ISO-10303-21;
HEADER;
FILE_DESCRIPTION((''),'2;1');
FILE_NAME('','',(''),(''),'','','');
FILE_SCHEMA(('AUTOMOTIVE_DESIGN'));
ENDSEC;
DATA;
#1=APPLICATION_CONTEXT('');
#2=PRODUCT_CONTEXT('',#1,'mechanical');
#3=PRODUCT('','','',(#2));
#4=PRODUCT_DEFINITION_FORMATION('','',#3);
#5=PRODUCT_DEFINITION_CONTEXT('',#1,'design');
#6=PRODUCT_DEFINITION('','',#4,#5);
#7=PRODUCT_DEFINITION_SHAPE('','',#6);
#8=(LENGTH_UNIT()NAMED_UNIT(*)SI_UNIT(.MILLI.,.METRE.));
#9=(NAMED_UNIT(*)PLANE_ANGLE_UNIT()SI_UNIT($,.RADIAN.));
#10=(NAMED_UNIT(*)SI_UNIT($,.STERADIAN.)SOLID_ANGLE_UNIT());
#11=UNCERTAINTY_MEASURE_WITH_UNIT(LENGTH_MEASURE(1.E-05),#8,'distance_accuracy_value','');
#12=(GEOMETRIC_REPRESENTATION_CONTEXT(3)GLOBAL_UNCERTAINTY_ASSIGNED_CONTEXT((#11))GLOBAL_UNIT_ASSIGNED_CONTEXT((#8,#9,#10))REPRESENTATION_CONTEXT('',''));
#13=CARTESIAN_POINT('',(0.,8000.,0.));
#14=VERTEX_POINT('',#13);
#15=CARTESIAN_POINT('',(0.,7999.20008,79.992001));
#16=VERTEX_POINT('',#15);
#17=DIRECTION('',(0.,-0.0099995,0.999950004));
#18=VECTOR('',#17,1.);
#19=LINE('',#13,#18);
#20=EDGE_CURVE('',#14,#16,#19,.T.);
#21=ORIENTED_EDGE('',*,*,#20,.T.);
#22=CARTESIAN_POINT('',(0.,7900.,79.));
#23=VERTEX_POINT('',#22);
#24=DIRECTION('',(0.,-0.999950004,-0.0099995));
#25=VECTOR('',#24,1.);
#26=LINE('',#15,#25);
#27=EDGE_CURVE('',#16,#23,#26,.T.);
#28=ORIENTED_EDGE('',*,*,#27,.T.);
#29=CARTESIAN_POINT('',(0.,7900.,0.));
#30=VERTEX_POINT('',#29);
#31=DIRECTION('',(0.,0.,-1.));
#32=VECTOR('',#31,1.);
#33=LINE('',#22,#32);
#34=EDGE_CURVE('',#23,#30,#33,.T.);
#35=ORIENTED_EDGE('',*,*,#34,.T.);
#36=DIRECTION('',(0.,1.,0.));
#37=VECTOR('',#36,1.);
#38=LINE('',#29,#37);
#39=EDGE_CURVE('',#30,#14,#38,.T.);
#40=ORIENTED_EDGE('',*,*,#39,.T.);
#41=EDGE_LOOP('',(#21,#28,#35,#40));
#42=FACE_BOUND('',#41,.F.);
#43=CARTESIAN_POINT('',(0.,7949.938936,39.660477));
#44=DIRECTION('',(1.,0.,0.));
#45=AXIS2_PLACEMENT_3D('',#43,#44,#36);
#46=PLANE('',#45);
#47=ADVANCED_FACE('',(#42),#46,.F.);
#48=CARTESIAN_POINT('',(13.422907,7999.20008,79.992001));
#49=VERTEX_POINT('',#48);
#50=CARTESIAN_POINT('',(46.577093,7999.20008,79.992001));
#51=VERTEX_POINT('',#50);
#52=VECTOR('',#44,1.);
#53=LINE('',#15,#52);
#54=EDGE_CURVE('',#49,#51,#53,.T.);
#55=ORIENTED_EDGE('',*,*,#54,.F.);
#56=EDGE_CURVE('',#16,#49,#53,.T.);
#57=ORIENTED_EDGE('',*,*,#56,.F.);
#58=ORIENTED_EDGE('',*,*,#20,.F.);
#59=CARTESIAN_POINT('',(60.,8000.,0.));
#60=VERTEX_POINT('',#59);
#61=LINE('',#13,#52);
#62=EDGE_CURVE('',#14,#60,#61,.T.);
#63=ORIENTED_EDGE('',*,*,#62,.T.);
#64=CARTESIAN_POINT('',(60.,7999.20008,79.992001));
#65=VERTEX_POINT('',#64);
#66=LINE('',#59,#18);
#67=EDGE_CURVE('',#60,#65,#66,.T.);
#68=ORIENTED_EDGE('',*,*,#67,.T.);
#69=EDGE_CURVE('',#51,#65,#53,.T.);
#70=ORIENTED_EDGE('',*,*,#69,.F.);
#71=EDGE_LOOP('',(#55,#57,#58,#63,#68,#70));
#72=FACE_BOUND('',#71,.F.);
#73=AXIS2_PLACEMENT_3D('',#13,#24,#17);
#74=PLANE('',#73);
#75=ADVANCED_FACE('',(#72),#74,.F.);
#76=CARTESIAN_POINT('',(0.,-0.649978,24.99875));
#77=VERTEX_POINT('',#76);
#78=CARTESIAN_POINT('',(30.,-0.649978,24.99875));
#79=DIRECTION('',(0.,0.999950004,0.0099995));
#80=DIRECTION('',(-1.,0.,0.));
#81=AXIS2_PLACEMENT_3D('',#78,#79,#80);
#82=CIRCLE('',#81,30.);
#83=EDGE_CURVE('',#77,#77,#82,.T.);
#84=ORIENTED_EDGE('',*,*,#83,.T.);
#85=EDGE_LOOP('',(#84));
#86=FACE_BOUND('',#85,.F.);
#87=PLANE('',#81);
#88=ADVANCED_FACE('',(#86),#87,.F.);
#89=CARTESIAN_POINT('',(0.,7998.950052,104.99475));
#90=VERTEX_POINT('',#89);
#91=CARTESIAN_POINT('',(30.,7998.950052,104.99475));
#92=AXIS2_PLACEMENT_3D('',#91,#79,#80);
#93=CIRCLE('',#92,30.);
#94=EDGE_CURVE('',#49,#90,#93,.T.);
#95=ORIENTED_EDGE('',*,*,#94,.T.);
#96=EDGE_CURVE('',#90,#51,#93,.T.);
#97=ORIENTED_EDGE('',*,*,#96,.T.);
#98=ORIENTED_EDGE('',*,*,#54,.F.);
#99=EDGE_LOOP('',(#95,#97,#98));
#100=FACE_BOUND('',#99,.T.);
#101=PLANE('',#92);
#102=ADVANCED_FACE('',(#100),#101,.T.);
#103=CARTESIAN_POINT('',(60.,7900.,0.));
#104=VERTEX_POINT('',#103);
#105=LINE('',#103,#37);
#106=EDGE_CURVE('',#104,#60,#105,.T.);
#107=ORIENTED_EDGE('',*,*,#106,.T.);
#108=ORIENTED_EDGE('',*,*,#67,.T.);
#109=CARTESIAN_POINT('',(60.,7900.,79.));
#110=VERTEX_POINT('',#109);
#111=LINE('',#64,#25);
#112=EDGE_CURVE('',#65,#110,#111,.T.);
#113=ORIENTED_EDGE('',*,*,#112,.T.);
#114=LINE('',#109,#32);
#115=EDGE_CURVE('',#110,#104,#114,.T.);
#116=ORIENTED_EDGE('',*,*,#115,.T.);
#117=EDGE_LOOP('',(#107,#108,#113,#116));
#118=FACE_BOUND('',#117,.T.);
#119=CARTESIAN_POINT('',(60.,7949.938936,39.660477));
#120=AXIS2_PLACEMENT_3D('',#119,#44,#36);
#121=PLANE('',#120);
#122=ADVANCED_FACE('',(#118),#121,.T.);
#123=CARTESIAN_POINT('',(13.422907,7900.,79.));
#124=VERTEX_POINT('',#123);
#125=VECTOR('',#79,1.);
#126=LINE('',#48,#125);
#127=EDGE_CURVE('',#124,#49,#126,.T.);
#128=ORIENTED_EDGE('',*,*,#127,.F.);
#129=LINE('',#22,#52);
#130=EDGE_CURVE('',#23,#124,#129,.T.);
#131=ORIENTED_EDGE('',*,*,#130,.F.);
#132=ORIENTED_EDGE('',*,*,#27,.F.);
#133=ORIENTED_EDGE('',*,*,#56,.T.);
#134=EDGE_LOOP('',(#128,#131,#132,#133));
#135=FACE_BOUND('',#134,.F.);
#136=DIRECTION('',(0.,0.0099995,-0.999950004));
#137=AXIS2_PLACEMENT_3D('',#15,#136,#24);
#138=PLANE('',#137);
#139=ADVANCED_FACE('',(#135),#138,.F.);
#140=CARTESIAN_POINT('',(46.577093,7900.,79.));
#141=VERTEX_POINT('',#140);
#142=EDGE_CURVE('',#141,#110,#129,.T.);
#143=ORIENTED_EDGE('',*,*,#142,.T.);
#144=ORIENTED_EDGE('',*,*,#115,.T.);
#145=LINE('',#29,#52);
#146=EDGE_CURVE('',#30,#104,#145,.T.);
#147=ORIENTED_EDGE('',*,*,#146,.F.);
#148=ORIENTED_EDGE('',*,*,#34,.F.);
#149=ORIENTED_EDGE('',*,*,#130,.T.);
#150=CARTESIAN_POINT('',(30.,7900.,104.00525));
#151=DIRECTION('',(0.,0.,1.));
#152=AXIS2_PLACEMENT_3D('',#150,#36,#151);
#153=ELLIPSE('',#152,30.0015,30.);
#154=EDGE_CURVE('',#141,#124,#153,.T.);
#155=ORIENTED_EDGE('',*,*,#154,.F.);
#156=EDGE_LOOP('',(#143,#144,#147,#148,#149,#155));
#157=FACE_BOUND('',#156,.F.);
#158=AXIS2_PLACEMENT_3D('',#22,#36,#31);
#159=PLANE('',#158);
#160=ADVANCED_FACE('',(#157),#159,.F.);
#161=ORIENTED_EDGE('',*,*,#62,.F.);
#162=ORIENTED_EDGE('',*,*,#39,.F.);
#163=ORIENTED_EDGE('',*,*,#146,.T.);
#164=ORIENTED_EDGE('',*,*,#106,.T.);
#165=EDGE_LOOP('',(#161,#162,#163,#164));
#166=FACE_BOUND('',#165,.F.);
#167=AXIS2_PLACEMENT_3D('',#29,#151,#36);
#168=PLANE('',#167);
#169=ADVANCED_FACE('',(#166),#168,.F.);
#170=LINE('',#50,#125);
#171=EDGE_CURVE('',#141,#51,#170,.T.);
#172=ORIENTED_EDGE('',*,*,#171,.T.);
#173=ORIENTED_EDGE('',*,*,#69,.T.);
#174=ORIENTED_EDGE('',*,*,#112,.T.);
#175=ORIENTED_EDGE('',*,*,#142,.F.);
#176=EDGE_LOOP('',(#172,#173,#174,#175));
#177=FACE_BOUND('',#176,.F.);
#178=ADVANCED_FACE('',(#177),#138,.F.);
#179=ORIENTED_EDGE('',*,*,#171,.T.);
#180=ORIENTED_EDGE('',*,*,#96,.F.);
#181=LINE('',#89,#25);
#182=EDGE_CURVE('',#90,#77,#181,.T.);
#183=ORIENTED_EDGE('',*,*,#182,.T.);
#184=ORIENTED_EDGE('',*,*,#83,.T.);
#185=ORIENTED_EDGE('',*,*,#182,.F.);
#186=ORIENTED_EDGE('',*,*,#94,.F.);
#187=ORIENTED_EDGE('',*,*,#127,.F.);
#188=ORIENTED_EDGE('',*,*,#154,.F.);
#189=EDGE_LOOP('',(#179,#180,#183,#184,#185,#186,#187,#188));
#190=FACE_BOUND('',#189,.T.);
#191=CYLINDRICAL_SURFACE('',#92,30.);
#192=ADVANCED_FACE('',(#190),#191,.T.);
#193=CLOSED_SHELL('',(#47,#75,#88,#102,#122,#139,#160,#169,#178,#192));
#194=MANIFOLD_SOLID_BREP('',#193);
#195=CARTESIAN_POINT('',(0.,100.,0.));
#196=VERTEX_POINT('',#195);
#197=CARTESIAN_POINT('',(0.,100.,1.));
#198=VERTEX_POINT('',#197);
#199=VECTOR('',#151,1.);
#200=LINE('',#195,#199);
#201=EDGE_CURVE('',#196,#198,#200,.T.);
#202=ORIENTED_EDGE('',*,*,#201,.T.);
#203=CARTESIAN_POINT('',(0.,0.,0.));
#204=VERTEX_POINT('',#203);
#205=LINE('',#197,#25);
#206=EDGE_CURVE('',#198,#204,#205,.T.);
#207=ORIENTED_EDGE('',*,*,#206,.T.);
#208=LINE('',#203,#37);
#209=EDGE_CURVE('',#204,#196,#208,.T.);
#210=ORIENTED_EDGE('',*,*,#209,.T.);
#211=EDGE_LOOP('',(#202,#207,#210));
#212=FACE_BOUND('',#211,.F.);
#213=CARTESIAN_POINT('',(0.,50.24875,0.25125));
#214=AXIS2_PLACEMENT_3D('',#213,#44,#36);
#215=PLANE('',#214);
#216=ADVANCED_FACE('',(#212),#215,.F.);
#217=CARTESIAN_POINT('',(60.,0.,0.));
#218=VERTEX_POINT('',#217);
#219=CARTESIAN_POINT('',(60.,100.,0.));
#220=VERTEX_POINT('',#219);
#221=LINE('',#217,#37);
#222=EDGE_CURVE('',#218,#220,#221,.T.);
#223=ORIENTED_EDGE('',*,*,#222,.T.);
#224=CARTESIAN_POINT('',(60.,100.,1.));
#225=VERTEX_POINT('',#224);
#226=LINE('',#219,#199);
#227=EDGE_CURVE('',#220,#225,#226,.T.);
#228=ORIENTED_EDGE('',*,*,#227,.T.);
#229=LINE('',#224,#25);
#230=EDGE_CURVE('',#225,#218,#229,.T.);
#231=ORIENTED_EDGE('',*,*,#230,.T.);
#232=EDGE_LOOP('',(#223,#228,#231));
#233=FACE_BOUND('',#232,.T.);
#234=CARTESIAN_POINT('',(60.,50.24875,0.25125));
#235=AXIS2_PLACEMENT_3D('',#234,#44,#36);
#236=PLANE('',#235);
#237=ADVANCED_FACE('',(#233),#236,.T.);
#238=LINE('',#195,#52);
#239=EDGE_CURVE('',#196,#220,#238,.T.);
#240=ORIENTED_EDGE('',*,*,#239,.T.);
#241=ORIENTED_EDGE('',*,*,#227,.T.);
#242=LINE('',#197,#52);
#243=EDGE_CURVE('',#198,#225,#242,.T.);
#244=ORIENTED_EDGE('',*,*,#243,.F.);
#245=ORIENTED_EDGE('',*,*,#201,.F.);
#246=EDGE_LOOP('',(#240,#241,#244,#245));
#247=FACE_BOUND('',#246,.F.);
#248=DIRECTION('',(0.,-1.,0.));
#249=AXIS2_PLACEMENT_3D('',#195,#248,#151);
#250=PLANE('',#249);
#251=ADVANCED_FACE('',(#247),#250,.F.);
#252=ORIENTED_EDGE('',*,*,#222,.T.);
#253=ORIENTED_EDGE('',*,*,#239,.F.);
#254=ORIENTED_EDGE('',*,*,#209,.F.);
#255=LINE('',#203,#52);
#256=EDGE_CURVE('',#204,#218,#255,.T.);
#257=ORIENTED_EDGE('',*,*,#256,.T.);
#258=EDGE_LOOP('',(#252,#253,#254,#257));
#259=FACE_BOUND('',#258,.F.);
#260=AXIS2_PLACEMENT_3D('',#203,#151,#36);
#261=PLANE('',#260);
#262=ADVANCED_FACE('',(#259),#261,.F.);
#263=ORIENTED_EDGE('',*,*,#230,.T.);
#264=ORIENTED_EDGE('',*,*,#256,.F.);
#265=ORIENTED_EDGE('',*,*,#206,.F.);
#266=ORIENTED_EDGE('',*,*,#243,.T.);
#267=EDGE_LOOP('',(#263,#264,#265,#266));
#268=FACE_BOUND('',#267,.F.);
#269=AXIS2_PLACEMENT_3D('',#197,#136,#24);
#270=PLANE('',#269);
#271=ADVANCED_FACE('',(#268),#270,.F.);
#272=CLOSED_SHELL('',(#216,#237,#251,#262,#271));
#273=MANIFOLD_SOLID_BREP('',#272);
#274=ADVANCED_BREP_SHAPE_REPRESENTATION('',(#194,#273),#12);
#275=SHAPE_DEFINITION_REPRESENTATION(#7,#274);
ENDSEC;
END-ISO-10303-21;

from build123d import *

# Parameters (mm, degrees)
F1_DEPTH = 60
F2_R     = 30
F3_DEPTH = 8000


with BuildPart() as f1:
    # F0 (on Right) → F1 (new body)
    with BuildSketch(Plane.YZ):
        Polygon((100, 1), (0, 0), (100, 0), align=None)
    extrude(amount=F1_DEPTH)


with BuildPart() as f1b:
    # F0 (on Right) → F1, piece 2 (new body)
    with BuildSketch(Plane.YZ):
        Polygon((7999.200079992, 79.9920007999), (7900, 79), (7900, 0), (8000, 0), align=None)
    extrude(amount=F1_DEPTH)

    # F2 (on face) → F3 (join)
    with BuildSketch(Plane(origin=(0, 7999.200079992, 79.9920007999), x_dir=(-1, 0, 0), z_dir=(0, 0.9999500037, 0.0099995))):
        with Locations((-30, 25.0039997)):
            Circle(F2_R)
    extrude(amount=-F3_DEPTH)


solid = Compound([f1.part, f1b.part])
